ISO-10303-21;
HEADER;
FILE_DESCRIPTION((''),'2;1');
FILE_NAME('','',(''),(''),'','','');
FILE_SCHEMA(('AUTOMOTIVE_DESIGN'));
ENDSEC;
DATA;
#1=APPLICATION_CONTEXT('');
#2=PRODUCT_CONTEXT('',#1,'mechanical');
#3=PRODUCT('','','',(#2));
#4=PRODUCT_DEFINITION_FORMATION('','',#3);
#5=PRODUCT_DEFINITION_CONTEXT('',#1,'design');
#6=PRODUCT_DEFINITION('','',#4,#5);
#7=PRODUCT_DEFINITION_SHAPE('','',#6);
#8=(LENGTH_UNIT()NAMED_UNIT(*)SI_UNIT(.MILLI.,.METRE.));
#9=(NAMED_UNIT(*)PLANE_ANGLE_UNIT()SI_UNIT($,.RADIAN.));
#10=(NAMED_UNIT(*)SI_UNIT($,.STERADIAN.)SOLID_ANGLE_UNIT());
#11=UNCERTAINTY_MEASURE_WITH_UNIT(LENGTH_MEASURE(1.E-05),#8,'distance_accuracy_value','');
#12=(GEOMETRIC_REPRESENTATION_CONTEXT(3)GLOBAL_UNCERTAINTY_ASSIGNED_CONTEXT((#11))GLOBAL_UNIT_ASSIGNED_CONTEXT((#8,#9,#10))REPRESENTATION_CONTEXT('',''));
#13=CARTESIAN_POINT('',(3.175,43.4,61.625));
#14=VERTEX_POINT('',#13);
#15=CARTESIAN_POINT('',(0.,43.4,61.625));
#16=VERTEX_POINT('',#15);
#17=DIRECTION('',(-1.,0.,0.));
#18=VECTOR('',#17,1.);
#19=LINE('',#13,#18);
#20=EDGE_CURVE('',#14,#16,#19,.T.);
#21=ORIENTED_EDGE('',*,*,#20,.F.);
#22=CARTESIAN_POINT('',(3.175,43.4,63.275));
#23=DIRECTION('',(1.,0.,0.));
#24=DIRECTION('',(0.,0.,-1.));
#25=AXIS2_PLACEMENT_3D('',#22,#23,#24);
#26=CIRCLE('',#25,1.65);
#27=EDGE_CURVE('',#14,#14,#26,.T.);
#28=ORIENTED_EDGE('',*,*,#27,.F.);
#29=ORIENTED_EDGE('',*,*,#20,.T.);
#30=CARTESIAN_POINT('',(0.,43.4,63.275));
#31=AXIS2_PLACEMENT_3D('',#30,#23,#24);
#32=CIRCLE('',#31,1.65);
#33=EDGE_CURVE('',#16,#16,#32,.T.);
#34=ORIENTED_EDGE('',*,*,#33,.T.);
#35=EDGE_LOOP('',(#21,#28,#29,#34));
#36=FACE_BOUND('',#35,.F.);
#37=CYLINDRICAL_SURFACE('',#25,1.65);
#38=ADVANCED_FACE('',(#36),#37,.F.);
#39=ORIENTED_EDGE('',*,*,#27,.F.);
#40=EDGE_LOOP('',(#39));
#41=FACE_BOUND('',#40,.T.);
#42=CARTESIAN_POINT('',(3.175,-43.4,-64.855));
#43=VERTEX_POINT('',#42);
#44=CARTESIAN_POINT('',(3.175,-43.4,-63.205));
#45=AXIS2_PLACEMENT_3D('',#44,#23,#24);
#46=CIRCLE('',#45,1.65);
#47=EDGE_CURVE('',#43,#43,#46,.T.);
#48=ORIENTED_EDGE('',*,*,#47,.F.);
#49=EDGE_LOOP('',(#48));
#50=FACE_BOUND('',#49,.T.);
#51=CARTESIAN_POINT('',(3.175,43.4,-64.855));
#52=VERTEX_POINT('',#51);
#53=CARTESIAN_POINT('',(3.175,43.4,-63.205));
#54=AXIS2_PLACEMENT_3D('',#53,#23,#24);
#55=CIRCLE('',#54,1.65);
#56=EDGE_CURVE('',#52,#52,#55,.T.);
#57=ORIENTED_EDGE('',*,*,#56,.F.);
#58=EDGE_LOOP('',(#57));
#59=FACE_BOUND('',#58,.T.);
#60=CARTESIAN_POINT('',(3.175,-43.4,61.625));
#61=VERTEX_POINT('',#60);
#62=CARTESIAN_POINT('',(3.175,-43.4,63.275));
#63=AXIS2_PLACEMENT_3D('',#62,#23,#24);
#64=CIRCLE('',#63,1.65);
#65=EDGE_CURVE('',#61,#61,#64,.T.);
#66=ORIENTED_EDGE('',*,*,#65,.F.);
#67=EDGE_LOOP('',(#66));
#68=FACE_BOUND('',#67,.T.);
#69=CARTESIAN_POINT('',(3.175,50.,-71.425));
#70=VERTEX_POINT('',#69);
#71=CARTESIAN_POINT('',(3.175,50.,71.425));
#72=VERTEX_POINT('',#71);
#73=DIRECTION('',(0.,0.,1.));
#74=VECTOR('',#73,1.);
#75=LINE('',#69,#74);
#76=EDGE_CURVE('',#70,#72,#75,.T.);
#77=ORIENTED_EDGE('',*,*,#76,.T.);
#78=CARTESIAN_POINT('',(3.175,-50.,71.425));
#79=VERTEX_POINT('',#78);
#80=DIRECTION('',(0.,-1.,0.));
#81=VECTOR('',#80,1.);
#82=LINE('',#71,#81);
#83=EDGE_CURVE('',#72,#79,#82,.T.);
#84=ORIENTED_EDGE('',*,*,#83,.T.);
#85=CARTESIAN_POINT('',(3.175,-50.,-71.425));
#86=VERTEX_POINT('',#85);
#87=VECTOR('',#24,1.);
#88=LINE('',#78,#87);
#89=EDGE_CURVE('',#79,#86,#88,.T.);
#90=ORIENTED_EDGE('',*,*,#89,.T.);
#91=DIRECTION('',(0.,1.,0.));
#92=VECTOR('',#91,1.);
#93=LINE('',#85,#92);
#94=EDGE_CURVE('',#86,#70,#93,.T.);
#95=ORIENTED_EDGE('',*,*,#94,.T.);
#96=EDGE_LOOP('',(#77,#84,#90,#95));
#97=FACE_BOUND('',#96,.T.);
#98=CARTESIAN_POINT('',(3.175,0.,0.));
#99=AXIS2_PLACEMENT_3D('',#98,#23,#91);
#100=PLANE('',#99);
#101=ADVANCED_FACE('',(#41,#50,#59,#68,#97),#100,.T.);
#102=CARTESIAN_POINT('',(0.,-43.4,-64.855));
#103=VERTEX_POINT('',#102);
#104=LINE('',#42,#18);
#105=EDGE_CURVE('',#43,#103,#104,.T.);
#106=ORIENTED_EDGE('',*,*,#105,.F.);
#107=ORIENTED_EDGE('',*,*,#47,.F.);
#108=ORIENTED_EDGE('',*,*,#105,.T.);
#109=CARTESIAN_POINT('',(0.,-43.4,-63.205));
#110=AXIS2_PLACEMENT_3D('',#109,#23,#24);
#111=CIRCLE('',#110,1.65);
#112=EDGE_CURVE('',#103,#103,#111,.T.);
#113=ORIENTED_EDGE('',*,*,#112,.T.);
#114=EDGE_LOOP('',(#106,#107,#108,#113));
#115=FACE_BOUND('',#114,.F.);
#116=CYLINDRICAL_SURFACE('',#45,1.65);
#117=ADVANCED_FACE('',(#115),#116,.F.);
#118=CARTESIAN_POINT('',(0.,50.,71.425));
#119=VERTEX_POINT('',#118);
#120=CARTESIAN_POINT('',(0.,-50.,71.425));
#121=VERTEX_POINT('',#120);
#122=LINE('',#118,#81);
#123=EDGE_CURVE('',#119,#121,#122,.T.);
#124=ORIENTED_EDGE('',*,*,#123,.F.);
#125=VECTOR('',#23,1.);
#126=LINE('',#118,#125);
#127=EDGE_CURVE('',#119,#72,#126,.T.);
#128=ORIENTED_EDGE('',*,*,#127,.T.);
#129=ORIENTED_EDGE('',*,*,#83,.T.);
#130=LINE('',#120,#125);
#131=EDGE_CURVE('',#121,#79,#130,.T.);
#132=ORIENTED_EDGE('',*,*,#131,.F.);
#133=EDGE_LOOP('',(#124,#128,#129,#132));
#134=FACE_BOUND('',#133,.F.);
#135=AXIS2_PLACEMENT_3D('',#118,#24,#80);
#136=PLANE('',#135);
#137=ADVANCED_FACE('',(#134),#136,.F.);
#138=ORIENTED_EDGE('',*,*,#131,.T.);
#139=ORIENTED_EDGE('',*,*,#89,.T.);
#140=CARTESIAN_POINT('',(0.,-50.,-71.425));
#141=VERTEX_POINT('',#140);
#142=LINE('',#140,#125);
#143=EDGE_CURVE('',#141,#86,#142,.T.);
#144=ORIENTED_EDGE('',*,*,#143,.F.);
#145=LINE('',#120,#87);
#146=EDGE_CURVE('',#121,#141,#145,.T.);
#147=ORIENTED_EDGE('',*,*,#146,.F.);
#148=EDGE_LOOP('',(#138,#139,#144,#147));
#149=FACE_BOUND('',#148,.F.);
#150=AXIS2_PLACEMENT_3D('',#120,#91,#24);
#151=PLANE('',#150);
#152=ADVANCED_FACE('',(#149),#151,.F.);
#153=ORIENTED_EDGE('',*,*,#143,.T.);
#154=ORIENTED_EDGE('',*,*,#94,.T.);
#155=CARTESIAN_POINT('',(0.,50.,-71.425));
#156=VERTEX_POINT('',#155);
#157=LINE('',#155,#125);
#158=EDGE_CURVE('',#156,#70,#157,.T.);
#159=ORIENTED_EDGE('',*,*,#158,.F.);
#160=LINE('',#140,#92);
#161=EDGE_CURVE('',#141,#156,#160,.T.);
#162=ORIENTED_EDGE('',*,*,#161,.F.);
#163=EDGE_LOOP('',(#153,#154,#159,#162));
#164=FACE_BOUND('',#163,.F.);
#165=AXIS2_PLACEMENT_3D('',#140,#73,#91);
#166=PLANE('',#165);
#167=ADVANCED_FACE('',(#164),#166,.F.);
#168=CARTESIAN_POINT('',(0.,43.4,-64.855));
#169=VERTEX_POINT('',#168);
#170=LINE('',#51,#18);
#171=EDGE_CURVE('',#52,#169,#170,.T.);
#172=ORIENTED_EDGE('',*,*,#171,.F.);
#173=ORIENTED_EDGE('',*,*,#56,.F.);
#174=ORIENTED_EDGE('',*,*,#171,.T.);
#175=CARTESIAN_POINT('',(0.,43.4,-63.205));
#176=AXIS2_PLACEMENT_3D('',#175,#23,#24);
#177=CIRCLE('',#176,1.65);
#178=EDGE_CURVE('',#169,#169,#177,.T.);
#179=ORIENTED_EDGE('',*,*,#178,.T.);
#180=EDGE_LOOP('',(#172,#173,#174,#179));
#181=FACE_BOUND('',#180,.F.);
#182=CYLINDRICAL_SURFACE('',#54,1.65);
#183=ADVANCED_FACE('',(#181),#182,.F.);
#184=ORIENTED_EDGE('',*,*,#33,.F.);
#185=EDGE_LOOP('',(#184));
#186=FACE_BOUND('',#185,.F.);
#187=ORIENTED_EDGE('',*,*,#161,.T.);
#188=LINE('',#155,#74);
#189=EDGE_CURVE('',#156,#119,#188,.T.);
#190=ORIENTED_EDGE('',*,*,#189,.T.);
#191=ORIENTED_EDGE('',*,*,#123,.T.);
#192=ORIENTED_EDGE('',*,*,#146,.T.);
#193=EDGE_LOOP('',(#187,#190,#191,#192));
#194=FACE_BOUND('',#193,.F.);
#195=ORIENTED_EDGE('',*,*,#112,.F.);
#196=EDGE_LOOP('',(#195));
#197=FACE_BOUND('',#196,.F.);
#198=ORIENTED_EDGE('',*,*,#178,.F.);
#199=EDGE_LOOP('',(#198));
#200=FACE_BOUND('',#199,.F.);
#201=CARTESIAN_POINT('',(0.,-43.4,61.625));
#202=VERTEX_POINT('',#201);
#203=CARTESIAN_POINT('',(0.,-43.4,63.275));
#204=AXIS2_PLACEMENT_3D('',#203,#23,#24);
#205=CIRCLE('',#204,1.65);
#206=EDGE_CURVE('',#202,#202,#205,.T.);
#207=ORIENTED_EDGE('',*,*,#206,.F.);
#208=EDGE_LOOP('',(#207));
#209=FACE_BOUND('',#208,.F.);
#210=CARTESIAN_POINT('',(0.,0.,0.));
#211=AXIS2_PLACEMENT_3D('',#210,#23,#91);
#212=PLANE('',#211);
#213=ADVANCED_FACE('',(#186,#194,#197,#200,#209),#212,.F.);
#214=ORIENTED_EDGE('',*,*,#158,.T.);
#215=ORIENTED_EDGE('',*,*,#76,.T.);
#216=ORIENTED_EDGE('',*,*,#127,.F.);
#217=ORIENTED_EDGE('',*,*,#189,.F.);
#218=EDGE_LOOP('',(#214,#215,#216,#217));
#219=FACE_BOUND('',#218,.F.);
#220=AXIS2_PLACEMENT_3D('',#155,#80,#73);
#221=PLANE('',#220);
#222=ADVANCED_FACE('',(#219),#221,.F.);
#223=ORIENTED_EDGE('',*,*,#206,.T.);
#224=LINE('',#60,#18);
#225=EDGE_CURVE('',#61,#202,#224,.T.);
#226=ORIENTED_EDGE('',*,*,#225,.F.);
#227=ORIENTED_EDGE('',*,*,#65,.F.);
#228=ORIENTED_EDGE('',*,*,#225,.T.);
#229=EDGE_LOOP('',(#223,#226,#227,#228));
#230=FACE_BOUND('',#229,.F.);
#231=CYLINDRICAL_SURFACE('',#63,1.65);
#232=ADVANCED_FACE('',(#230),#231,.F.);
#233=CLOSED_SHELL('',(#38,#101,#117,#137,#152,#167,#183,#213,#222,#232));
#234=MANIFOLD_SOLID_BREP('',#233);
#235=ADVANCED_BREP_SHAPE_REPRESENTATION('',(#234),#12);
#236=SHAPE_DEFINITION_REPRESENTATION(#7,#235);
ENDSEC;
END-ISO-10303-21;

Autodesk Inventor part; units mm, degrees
ref_plane "YZ Plane" through (0, 0, 0) normal (1, 0, 0) x (0, 1, 0)
ref_plane "XZ Plane" through (0, 0, 0) normal (0, 1, 0) x (-1, 0, 0)
ref_plane "XY Plane" through (0, 0, 0) normal (0, 0, 1) x (1, 0, 0)
sketch "Sketch1" plane through (0, 0, 0) normal (1, 0, 0) x (0, 1, 0)
  line L0 (50, 71.425) -> (-50, 71.425)
  line L1 (-50, 71.425) -> (-50, -71.425)
  line L2 (-50, -71.425) -> (50, -71.425)
  line L3 (50, -71.425) -> (50, 71.425)
  line L4 (50, 71.425) -> (-50, -71.425) construction
  line L5 (-50, 71.425) -> (50, -71.425) construction
  point P0 (0, 0)
extrude "Side_Base" add sketch "Sketch1" along normal blind 3.175
sketch "Sketch2" plane through (3.175, 0, 0) normal (1, 0, 0) x (0, 0, -1)
  circle A0 centre (-63.275, 43.4) radius 1.65
  circle A1 centre (63.205, 43.4) radius 1.65
  circle A2 centre (63.205, -43.4) radius 1.65
  circle A3 centre (-63.275, -43.4) radius 1.65
  line L0 (71.425, 50) -> (-71.425, 50) projected
  line L1 (-71.425, 50) -> (-71.425, -50) projected
  line L2 (71.425, -50) -> (71.425, 50) projected
  line L3 (-71.425, -50) -> (71.425, -50) projected
  point P0 (0, 0)
  dimension "d5" = 6.6
  dimension "d6" = 8.15
  dimension "d8" = 6.6
  dimension "d19" = 126.48
  dimension "d20" = 8.22
extrude "Joint_Holes" cut sketch "Sketch2" along normal through all both and the other way through all contours A0 | A1 | A2 | A3
equation "\"d8\" = d5"
properties part number "VP-01" material "Wood (Cherry)"
